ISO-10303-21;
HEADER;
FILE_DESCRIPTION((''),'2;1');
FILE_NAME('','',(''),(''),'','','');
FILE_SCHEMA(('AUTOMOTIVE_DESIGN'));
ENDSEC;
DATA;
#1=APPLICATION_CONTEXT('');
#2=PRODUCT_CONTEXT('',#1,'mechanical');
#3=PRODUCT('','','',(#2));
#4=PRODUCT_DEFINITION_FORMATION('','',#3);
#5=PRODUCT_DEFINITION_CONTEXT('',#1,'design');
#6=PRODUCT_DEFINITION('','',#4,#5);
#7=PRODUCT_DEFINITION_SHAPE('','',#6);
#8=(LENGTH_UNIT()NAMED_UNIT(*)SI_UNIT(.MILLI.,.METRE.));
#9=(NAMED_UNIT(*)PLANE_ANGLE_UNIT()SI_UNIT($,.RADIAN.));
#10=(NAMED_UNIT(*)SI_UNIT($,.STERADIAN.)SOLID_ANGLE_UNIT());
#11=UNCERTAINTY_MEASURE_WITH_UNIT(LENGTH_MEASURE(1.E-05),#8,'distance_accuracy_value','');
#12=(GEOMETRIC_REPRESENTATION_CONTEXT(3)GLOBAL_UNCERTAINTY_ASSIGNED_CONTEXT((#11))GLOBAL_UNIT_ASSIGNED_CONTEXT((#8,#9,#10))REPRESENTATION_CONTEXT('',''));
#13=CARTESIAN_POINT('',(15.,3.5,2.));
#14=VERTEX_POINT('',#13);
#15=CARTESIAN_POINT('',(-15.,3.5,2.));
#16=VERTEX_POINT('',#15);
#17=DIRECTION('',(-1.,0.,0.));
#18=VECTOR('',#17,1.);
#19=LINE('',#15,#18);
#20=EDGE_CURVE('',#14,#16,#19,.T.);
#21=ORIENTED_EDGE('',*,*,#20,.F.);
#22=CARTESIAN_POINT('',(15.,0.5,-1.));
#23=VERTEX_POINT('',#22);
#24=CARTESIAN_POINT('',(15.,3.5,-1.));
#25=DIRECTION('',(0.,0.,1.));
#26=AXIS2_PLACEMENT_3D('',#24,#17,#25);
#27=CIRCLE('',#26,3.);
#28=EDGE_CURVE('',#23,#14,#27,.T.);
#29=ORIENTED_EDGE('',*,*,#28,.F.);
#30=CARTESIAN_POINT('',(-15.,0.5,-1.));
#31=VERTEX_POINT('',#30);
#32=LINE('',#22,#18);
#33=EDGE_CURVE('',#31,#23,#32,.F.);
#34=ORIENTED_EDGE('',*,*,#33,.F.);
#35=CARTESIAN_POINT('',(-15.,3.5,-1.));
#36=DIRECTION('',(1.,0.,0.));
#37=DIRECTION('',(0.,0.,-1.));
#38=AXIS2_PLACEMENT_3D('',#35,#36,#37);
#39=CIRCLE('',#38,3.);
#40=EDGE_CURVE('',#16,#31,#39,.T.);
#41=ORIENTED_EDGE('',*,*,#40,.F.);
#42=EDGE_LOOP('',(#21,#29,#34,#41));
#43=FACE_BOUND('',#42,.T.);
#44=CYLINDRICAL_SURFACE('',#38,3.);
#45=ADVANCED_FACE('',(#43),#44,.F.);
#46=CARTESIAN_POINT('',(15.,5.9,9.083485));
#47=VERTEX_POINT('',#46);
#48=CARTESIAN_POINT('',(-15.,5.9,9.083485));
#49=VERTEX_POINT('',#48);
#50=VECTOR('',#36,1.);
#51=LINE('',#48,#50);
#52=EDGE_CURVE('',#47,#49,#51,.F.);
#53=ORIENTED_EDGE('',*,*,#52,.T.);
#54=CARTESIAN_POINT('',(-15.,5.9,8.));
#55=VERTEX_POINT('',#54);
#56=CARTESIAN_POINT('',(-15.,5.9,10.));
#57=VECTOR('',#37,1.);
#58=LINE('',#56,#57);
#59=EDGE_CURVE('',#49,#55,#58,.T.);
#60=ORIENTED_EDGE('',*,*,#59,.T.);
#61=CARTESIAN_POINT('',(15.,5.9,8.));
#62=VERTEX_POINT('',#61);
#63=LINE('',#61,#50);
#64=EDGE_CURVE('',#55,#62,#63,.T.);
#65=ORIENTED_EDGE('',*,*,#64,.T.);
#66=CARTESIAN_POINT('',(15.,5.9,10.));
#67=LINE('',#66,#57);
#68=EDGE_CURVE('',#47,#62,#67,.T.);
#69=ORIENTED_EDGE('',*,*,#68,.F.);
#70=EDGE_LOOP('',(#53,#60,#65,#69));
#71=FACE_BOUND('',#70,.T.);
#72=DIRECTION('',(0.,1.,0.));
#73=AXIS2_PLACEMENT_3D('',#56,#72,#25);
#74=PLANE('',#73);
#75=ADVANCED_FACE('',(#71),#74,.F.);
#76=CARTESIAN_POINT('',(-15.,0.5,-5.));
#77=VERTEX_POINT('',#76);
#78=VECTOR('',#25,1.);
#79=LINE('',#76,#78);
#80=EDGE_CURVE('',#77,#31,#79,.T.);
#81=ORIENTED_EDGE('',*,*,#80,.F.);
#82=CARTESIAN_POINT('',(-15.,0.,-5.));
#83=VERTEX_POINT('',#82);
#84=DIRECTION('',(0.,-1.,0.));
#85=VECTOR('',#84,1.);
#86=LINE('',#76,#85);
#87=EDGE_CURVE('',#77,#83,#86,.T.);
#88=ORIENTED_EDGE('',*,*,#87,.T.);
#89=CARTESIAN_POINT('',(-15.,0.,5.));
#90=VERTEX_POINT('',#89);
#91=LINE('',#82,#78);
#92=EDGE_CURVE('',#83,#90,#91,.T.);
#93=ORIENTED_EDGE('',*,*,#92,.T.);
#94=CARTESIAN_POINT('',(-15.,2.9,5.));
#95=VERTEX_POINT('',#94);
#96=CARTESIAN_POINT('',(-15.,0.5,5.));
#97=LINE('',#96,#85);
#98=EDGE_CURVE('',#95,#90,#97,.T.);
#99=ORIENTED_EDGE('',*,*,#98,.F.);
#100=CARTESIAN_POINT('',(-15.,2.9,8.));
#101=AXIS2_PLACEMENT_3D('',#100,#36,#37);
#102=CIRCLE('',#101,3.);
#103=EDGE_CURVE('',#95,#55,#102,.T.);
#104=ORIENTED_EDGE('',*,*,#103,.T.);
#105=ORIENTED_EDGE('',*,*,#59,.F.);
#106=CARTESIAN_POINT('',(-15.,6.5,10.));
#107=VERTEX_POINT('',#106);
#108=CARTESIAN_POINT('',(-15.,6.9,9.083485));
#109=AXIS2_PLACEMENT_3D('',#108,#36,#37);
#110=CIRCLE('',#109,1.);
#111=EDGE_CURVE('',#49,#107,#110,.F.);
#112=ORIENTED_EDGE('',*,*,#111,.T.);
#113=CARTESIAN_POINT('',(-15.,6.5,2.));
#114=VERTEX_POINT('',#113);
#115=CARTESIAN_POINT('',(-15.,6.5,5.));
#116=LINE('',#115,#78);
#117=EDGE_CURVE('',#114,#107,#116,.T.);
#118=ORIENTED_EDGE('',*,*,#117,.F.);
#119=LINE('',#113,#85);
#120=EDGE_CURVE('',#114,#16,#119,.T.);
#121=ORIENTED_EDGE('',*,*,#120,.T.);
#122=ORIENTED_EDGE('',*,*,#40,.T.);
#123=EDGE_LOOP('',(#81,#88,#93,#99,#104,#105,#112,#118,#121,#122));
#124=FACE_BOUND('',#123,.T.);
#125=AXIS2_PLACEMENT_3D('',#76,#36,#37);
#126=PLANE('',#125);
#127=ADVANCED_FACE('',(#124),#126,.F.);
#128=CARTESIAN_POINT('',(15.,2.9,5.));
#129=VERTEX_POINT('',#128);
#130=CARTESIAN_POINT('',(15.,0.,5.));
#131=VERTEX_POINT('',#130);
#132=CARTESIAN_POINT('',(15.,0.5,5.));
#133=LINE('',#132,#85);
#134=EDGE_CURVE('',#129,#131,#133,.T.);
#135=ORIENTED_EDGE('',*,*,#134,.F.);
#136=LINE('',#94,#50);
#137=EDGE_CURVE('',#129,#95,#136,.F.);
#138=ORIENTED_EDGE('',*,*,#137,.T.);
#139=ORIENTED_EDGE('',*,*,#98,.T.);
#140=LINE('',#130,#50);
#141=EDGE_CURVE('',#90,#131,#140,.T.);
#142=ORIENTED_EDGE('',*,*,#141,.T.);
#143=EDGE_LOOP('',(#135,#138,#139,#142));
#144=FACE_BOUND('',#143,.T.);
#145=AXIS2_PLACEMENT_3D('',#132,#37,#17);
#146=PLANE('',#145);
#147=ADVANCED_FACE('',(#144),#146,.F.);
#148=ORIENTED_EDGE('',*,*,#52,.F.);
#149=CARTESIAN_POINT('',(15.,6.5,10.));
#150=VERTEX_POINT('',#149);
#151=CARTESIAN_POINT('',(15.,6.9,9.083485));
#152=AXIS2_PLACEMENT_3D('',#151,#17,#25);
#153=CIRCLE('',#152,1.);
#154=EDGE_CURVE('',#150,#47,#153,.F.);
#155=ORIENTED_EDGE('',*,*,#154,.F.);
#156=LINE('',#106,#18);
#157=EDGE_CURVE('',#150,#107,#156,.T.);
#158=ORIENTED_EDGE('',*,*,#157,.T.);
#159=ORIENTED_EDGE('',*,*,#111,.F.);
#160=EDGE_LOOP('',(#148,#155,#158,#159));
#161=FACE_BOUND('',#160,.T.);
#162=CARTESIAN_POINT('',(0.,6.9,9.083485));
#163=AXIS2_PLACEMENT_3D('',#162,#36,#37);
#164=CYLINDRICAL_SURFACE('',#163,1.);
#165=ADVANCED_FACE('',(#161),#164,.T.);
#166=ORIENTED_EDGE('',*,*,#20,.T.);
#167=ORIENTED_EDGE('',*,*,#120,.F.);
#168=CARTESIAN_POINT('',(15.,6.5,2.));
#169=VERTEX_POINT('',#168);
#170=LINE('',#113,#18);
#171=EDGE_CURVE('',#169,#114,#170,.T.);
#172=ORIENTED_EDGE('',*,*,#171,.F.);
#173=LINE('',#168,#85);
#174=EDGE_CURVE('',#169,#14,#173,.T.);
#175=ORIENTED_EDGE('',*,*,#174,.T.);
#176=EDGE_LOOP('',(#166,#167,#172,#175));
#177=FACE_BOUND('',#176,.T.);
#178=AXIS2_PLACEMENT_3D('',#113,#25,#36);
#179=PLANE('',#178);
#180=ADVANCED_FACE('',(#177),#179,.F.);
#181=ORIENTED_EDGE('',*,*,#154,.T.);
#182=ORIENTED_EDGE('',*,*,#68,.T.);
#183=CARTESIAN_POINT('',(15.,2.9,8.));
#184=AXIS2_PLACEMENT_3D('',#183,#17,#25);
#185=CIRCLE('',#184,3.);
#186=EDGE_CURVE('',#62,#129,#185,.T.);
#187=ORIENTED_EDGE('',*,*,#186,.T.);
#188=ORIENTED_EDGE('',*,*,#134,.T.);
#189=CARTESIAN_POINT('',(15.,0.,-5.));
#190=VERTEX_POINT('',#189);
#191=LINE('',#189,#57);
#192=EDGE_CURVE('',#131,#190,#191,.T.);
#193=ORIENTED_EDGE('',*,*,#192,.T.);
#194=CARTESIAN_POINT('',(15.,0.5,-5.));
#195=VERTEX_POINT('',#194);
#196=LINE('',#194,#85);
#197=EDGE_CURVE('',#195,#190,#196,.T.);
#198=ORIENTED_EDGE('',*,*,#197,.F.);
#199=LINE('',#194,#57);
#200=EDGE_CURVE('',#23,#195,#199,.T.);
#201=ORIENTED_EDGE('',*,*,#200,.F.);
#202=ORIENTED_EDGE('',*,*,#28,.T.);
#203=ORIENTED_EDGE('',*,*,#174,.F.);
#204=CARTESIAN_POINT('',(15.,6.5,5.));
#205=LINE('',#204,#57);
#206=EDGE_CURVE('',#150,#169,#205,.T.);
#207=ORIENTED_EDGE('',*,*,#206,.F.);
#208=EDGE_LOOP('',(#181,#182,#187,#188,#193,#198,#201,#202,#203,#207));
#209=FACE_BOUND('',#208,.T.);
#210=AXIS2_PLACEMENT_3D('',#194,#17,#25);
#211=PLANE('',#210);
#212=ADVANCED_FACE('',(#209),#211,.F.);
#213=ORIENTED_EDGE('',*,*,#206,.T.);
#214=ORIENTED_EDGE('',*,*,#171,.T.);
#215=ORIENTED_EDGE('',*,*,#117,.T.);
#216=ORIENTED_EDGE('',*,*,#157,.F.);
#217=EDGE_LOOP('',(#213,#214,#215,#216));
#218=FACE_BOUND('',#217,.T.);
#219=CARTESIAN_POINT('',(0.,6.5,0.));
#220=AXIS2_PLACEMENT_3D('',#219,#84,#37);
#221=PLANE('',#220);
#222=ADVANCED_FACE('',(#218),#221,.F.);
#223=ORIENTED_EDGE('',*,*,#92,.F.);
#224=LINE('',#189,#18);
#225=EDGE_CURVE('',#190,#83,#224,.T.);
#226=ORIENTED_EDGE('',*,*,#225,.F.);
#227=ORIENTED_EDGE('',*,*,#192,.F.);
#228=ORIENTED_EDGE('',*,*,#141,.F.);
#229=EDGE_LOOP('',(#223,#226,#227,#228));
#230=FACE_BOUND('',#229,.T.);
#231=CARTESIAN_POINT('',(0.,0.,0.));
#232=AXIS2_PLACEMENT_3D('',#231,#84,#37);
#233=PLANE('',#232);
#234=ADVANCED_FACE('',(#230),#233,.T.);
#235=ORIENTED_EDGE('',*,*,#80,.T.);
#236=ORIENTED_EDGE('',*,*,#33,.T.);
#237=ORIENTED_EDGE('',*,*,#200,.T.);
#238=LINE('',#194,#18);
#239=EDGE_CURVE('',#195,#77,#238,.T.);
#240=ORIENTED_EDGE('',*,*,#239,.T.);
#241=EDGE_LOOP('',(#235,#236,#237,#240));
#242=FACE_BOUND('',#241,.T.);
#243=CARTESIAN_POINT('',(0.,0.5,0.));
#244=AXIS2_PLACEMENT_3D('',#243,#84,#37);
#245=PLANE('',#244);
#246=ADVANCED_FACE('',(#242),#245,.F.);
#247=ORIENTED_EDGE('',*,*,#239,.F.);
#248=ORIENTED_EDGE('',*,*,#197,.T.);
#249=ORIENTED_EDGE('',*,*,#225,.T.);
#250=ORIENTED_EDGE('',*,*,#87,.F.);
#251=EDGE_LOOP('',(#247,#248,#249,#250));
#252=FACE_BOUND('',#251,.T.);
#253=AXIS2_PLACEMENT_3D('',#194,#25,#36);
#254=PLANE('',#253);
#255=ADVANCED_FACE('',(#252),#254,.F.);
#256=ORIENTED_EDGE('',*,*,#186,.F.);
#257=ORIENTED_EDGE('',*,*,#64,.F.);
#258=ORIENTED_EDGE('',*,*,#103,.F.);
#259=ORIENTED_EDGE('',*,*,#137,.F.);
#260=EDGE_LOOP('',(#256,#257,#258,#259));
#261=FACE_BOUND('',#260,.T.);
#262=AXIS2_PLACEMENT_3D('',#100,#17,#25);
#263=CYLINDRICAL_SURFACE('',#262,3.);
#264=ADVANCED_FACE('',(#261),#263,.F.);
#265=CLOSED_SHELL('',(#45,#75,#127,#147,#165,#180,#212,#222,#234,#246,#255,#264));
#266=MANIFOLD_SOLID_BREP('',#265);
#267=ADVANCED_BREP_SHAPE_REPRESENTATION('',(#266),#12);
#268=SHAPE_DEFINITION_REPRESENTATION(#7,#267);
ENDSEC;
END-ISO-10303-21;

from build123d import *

# Parameters (mm, degrees)
SKETCH1_W           = 30
SKETCH1_H           = 10
BOSS_EXTRUDE1_DEPTH = 0.5
SKETCH2_W           = 30
SKETCH2_H           = 3
BOSS_EXTRUDE2_DEPTH = 6
SKETCH3_W           = 30
SKETCH3_H           = 0.6
BOSS_EXTRUDE3_DEPTH = 5
FILLET1_R           = 3
FILLET2_R           = 1


with BuildPart() as part:
    # Sketch1 → Boss-Extrude1 (new body)
    with BuildSketch(Plane(origin=(0, 0, 0), x_dir=(1, 0, 0), z_dir=(0, 1, 0))):
        Rectangle(SKETCH1_W, SKETCH1_H)
    extrude(amount=BOSS_EXTRUDE1_DEPTH)

    # Sketch2 → Boss-Extrude2 (add)
    with BuildSketch(Plane(origin=(0, 0.5, 0), x_dir=(1, 0, 0), z_dir=(0, 1, 0))):
        with Locations((0, -3.5)):
            Rectangle(SKETCH2_W, SKETCH2_H)
    extrude(amount=BOSS_EXTRUDE2_DEPTH)

    # Sketch3 → Boss-Extrude3 (add)
    with BuildSketch(Plane.XY.offset(5)):
        with Locations((0, 6.2)):
            Rectangle(SKETCH3_W, SKETCH3_H)
    extrude(amount=BOSS_EXTRUDE3_DEPTH)

    # Fillet1
    fillet1_edges = [part.edges().sort_by_distance(p)[0] for p in [
        (0, 0.5, 2),
        (0, 5.9, 5),
    ]]
    fillet(fillet1_edges, radius=FILLET1_R)

    # Fillet2
    # the kernel refuses this fillet: 1 mm, written as the material it takes off along each edge
    with BuildSketch(Plane(origin=(17.291287847, 5.9, 10), x_dir=(0, 0, -1), z_dir=(-1, 0, 0))) as fillet2_piece_1:
        with BuildLine():
            CenterArc((0.916515139, -1), FILLET2_R, 90, 66.421821522)
            Line((0, -0.6), (-0.018330303, -0.592))
            ThreePointArc((-0.018330303, -0.592), (-0.02, -0.3), (-0.02, 0))
            Line((-0.02, 0), (0, 0.02))
            Line((0, 0.02), (0.916515139, 0.02))
            Line((0.916515139, 0.02), (0.916515139, 0))
        make_face()
    extrude(amount=34.582575695, mode=Mode.SUBTRACT)


solid = part.part
